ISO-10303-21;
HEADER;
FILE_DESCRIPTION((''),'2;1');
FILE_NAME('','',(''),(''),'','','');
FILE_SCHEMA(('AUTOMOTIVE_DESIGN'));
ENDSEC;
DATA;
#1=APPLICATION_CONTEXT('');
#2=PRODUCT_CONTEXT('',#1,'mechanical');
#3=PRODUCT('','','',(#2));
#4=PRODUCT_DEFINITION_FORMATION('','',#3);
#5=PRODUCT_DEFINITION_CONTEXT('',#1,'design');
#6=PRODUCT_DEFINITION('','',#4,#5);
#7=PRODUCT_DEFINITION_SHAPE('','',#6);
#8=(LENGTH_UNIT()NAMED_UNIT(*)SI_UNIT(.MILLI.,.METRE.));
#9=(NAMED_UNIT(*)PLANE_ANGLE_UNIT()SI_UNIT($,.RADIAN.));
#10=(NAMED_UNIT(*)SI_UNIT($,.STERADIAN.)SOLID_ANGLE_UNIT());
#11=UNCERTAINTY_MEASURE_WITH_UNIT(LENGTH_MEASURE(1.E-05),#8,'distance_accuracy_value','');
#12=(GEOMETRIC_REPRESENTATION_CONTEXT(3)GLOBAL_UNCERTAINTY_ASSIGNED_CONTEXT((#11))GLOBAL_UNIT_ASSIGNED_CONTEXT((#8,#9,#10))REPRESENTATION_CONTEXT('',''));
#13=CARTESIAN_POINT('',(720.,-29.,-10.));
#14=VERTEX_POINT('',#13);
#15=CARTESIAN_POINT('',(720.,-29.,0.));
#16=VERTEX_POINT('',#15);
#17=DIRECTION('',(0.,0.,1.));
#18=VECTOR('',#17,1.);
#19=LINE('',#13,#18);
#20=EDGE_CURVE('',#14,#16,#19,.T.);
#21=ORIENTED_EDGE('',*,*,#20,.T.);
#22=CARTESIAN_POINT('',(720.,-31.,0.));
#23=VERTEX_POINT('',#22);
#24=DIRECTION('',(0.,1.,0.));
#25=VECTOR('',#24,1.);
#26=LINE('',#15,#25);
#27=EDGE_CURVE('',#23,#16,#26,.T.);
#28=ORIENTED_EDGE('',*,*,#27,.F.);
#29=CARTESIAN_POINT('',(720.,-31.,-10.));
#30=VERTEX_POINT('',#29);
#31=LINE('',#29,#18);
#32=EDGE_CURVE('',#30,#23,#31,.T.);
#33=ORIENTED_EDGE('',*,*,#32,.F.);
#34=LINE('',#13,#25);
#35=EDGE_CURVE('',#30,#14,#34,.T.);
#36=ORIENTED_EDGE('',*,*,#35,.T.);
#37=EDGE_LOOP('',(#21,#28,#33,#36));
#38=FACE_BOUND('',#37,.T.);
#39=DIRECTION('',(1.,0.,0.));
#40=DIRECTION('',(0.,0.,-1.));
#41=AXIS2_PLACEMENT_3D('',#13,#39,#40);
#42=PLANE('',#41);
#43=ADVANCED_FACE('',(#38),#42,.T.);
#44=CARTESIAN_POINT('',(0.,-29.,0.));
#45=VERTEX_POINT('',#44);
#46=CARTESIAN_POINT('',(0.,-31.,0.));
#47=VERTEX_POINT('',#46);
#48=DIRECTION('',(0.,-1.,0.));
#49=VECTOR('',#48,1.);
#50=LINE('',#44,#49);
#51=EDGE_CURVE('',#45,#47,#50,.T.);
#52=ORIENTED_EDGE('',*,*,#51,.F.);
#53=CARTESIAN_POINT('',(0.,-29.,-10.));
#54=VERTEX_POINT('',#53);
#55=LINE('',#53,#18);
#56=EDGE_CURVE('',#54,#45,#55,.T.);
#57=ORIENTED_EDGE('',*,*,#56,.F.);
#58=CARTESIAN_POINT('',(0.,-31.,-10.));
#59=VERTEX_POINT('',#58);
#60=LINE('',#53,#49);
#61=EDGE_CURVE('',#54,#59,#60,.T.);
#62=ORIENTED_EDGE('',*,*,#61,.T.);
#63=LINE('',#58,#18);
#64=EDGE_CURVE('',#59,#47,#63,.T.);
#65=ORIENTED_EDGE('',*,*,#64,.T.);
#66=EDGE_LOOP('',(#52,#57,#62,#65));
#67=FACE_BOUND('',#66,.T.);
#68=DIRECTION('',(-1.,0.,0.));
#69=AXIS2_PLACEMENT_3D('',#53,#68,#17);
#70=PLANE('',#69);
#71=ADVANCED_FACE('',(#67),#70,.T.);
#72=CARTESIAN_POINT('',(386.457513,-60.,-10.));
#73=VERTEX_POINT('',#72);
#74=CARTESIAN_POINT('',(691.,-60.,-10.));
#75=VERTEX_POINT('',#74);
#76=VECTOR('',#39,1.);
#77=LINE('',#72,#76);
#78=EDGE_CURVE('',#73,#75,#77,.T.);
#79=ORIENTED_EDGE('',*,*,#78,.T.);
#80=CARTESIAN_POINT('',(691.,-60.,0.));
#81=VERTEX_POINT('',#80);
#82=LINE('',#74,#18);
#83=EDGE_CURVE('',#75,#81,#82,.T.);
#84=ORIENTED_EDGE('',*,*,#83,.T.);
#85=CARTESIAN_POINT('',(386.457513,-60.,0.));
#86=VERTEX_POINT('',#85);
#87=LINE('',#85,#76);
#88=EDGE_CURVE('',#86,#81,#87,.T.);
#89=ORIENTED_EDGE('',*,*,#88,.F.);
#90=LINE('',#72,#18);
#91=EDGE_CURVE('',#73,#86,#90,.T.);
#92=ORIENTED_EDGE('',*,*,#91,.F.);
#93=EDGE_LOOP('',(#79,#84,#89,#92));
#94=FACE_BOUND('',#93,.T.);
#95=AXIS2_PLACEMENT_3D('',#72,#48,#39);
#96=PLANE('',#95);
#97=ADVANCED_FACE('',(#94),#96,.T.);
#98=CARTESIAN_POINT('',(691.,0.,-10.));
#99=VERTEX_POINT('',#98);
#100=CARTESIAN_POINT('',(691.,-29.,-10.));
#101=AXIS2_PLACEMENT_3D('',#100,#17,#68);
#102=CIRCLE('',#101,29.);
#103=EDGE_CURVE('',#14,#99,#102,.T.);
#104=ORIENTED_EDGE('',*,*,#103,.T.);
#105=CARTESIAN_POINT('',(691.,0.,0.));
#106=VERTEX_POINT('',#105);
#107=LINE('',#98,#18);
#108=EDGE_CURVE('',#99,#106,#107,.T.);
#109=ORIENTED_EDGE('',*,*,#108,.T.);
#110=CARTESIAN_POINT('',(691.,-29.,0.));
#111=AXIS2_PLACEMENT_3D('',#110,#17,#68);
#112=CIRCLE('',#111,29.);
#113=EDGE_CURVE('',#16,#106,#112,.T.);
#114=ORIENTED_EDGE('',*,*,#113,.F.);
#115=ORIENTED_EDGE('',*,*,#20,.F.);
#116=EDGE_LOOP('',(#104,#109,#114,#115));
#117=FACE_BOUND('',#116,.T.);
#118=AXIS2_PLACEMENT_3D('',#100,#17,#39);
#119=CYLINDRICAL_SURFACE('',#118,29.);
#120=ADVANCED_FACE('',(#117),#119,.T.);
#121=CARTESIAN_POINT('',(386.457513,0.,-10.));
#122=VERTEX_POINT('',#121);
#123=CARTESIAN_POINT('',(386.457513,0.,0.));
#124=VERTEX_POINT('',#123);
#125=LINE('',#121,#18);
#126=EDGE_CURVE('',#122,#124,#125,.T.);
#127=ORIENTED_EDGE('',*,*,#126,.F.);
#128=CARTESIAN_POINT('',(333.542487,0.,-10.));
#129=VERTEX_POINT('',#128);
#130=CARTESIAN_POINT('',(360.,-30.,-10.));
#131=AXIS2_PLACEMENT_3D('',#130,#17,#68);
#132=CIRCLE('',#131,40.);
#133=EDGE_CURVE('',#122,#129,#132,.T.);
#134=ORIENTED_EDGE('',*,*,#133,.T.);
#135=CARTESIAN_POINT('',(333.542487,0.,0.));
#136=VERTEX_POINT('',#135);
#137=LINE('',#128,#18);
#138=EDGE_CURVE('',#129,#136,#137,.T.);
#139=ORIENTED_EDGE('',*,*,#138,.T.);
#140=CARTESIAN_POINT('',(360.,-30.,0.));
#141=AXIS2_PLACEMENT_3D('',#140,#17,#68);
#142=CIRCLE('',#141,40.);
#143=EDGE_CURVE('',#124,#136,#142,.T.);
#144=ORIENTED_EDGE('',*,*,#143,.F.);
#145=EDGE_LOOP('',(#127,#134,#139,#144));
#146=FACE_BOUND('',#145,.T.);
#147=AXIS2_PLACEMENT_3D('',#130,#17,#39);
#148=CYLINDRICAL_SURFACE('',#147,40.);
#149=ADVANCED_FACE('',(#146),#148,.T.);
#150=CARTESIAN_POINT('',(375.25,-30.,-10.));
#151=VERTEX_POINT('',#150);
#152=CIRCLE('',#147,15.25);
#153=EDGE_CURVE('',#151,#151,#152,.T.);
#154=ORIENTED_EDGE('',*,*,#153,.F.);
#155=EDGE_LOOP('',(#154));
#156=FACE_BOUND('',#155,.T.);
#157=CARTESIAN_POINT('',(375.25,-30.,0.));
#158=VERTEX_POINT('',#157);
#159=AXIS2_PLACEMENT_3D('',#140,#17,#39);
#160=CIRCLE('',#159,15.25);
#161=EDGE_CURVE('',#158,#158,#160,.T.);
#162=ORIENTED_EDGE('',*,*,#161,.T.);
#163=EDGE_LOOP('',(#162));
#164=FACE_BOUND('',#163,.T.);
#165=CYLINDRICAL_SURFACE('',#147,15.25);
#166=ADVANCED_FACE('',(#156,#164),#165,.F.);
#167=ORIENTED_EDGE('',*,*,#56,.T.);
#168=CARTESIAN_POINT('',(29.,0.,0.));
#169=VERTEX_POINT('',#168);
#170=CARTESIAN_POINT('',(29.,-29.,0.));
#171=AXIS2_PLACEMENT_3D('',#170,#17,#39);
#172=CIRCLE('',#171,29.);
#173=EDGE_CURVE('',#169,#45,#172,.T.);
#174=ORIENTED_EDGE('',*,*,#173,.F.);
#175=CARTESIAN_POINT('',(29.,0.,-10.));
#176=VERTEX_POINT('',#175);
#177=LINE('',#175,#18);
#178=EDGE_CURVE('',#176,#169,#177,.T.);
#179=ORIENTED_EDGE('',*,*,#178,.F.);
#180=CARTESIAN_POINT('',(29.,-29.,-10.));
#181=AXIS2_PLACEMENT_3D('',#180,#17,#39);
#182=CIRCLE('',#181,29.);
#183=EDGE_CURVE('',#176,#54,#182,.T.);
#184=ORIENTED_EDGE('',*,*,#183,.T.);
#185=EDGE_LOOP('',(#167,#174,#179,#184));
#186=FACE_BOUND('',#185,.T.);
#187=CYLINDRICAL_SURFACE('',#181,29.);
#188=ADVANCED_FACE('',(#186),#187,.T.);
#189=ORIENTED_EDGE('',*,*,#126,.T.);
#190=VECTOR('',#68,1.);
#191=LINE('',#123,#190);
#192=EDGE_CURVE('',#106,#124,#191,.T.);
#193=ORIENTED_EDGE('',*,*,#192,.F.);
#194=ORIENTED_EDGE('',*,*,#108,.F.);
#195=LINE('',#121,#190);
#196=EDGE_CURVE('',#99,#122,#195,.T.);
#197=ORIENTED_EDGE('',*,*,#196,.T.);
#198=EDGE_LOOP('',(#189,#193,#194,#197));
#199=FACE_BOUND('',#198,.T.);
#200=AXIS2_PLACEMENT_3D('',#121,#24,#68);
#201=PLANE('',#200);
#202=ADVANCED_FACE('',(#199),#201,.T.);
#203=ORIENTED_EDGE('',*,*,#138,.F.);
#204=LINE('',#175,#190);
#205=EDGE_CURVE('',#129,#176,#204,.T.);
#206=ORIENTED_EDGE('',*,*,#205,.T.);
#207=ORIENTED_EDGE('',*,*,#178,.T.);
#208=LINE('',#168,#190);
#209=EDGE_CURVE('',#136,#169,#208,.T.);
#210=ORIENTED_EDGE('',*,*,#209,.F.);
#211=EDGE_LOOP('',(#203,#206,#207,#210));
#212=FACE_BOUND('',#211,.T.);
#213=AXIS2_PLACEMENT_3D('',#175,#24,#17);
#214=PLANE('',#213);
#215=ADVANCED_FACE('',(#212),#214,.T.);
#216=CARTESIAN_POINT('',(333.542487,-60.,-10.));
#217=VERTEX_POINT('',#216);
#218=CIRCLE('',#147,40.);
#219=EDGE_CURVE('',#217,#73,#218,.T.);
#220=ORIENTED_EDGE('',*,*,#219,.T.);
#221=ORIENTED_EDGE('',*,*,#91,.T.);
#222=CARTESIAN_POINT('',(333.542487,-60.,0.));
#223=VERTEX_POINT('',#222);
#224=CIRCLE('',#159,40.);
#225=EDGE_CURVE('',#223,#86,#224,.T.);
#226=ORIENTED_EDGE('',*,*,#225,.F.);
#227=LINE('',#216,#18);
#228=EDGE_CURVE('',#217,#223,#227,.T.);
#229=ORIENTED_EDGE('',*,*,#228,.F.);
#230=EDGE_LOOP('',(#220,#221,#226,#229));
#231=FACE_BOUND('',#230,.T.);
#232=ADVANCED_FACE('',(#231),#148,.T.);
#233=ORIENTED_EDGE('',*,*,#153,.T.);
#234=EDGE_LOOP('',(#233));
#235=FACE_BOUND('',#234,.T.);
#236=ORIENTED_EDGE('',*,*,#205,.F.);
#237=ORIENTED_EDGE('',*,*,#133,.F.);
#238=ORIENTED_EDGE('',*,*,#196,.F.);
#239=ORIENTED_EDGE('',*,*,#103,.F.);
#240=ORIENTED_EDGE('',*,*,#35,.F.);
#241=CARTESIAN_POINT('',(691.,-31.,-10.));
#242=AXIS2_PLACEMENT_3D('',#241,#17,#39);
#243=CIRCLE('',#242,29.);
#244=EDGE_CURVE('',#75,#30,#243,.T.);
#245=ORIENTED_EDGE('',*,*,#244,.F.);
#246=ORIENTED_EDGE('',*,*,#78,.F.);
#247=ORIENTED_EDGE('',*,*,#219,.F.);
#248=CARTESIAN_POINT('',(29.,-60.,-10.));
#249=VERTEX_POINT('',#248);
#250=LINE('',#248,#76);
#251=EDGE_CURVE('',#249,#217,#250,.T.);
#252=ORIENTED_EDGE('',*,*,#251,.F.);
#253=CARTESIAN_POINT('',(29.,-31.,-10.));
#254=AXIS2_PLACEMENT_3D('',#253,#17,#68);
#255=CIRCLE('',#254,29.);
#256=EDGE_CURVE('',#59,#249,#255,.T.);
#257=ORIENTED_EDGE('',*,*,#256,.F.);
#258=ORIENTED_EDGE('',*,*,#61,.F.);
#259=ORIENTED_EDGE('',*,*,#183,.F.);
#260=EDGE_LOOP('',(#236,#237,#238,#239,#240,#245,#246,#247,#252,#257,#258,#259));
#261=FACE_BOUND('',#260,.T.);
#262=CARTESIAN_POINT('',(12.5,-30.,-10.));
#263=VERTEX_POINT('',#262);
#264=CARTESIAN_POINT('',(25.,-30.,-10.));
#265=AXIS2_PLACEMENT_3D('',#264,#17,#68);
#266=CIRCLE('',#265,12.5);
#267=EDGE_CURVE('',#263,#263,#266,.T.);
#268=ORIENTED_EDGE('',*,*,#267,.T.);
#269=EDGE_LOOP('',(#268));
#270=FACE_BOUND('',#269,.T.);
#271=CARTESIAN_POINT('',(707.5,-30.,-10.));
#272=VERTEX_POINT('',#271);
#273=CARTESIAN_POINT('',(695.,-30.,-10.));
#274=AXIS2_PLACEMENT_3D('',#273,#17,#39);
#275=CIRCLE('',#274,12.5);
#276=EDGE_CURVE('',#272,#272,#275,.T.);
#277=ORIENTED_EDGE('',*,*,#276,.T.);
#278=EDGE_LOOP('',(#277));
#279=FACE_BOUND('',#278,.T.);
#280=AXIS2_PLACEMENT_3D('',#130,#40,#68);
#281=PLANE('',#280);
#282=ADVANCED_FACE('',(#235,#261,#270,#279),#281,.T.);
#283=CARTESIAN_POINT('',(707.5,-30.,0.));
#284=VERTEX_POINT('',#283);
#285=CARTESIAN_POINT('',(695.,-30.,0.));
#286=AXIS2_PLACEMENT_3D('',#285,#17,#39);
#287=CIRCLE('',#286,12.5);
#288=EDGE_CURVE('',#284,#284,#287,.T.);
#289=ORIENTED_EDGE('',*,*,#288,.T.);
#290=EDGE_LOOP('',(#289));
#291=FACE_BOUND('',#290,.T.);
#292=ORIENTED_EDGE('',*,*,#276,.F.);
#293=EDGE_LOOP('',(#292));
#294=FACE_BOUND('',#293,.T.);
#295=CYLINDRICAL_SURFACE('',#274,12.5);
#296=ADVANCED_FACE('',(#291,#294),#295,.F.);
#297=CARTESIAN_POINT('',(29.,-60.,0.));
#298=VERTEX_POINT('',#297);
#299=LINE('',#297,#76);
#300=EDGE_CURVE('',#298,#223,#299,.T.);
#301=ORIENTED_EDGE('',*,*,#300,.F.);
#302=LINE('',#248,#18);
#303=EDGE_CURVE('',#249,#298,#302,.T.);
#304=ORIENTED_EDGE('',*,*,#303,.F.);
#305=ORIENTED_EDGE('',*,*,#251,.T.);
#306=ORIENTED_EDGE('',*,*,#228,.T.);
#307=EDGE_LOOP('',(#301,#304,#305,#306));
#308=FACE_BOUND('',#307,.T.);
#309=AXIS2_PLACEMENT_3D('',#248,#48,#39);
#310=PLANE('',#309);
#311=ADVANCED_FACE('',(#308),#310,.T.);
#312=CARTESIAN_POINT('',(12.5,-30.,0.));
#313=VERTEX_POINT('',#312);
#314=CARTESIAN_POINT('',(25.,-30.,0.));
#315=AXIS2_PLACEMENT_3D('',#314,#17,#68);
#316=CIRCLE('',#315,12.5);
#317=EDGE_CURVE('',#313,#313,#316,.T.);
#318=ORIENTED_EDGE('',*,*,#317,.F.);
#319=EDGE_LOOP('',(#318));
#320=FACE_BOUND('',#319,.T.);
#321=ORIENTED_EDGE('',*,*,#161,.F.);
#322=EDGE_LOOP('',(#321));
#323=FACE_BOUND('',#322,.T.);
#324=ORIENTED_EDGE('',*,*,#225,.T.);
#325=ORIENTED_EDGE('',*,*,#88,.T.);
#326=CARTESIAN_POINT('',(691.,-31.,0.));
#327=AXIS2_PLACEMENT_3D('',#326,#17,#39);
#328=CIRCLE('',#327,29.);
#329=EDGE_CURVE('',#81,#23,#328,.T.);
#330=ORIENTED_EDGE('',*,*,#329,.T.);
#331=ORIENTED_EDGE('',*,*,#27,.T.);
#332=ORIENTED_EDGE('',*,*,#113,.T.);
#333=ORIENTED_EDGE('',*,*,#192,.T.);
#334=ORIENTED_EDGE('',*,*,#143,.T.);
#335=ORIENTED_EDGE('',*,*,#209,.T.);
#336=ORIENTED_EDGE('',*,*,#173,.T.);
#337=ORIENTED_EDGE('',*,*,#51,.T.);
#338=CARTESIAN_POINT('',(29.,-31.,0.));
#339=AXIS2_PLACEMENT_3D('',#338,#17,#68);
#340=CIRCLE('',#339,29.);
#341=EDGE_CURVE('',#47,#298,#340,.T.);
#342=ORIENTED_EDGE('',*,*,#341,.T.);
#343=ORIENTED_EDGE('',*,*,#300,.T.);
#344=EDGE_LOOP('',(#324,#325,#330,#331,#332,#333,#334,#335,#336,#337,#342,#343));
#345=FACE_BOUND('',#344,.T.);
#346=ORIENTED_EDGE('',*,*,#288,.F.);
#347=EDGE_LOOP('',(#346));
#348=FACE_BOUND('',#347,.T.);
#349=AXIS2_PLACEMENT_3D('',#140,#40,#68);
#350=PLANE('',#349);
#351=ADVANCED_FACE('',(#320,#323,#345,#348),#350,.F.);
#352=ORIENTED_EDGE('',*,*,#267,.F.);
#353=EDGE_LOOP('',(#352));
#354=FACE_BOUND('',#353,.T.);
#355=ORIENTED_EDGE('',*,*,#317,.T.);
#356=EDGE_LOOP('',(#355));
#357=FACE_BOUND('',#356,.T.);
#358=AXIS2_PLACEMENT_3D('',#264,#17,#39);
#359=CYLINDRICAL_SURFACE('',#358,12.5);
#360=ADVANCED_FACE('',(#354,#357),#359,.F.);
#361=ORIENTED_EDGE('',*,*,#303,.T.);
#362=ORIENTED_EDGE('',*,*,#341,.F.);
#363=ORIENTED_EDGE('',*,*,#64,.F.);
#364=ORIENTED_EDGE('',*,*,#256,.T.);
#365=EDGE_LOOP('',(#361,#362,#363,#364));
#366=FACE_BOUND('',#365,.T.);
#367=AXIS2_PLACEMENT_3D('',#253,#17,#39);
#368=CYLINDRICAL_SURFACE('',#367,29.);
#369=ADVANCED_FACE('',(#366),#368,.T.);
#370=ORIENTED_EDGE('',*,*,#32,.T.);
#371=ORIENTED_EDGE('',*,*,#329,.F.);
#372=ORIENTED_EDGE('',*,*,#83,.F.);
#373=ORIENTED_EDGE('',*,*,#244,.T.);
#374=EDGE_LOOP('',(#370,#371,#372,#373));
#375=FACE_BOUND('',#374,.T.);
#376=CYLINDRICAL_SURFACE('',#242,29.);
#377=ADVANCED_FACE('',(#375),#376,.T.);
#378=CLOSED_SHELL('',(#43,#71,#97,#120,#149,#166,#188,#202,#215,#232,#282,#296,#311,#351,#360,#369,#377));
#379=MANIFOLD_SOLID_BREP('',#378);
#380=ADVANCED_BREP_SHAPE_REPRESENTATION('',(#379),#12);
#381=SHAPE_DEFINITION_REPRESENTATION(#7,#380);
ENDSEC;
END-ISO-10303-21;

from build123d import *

# Parameters (mm, degrees)
IZIM1_R            = 15.25
IZIM1_R_2          = 12.5
TABAN_FLAN_1_DEPTH = 10


# Sheet-metal steps are written as plain solids
with BuildPart() as part:
    # Çizim1 → Taban-Flanş1 (new body)
    with BuildSketch(Plane.XY):
        with BuildLine():
            Line((29, 0), (333.542486889, 0))
            ThreePointArc((333.542486889, 0), (360, 10), (386.457513111, 0))
            Line((386.457513111, 0), (691, 0))
            ThreePointArc((691, 0), (711.506096654, -8.493903346), (720, -29))
            Line((720, -29), (720, -31))
            ThreePointArc((720, -31), (711.506096654, -51.506096654), (691, -60))
            Line((691, -60), (386.457513111, -60))
            ThreePointArc((386.457513111, -60), (360, -70), (333.542486889, -60))
            Line((333.542486889, -60), (29, -60))
            ThreePointArc((29, -60), (8.493903346, -51.506096654), (0, -31))
            Line((0, -31), (0, -29))
            ThreePointArc((0, -29), (8.493903346, -8.493903346), (29, 0))
        make_face()
        with Locations((360, -30)):
            Circle(IZIM1_R, mode=Mode.SUBTRACT)
        with Locations((695, -30)):
            Circle(IZIM1_R_2, mode=Mode.SUBTRACT)
        with Locations(Location((25, -30, 0), (0, 0, 180))):
            Circle(IZIM1_R_2, mode=Mode.SUBTRACT)
    extrude(amount=-TABAN_FLAN_1_DEPTH)


solid = part.part
